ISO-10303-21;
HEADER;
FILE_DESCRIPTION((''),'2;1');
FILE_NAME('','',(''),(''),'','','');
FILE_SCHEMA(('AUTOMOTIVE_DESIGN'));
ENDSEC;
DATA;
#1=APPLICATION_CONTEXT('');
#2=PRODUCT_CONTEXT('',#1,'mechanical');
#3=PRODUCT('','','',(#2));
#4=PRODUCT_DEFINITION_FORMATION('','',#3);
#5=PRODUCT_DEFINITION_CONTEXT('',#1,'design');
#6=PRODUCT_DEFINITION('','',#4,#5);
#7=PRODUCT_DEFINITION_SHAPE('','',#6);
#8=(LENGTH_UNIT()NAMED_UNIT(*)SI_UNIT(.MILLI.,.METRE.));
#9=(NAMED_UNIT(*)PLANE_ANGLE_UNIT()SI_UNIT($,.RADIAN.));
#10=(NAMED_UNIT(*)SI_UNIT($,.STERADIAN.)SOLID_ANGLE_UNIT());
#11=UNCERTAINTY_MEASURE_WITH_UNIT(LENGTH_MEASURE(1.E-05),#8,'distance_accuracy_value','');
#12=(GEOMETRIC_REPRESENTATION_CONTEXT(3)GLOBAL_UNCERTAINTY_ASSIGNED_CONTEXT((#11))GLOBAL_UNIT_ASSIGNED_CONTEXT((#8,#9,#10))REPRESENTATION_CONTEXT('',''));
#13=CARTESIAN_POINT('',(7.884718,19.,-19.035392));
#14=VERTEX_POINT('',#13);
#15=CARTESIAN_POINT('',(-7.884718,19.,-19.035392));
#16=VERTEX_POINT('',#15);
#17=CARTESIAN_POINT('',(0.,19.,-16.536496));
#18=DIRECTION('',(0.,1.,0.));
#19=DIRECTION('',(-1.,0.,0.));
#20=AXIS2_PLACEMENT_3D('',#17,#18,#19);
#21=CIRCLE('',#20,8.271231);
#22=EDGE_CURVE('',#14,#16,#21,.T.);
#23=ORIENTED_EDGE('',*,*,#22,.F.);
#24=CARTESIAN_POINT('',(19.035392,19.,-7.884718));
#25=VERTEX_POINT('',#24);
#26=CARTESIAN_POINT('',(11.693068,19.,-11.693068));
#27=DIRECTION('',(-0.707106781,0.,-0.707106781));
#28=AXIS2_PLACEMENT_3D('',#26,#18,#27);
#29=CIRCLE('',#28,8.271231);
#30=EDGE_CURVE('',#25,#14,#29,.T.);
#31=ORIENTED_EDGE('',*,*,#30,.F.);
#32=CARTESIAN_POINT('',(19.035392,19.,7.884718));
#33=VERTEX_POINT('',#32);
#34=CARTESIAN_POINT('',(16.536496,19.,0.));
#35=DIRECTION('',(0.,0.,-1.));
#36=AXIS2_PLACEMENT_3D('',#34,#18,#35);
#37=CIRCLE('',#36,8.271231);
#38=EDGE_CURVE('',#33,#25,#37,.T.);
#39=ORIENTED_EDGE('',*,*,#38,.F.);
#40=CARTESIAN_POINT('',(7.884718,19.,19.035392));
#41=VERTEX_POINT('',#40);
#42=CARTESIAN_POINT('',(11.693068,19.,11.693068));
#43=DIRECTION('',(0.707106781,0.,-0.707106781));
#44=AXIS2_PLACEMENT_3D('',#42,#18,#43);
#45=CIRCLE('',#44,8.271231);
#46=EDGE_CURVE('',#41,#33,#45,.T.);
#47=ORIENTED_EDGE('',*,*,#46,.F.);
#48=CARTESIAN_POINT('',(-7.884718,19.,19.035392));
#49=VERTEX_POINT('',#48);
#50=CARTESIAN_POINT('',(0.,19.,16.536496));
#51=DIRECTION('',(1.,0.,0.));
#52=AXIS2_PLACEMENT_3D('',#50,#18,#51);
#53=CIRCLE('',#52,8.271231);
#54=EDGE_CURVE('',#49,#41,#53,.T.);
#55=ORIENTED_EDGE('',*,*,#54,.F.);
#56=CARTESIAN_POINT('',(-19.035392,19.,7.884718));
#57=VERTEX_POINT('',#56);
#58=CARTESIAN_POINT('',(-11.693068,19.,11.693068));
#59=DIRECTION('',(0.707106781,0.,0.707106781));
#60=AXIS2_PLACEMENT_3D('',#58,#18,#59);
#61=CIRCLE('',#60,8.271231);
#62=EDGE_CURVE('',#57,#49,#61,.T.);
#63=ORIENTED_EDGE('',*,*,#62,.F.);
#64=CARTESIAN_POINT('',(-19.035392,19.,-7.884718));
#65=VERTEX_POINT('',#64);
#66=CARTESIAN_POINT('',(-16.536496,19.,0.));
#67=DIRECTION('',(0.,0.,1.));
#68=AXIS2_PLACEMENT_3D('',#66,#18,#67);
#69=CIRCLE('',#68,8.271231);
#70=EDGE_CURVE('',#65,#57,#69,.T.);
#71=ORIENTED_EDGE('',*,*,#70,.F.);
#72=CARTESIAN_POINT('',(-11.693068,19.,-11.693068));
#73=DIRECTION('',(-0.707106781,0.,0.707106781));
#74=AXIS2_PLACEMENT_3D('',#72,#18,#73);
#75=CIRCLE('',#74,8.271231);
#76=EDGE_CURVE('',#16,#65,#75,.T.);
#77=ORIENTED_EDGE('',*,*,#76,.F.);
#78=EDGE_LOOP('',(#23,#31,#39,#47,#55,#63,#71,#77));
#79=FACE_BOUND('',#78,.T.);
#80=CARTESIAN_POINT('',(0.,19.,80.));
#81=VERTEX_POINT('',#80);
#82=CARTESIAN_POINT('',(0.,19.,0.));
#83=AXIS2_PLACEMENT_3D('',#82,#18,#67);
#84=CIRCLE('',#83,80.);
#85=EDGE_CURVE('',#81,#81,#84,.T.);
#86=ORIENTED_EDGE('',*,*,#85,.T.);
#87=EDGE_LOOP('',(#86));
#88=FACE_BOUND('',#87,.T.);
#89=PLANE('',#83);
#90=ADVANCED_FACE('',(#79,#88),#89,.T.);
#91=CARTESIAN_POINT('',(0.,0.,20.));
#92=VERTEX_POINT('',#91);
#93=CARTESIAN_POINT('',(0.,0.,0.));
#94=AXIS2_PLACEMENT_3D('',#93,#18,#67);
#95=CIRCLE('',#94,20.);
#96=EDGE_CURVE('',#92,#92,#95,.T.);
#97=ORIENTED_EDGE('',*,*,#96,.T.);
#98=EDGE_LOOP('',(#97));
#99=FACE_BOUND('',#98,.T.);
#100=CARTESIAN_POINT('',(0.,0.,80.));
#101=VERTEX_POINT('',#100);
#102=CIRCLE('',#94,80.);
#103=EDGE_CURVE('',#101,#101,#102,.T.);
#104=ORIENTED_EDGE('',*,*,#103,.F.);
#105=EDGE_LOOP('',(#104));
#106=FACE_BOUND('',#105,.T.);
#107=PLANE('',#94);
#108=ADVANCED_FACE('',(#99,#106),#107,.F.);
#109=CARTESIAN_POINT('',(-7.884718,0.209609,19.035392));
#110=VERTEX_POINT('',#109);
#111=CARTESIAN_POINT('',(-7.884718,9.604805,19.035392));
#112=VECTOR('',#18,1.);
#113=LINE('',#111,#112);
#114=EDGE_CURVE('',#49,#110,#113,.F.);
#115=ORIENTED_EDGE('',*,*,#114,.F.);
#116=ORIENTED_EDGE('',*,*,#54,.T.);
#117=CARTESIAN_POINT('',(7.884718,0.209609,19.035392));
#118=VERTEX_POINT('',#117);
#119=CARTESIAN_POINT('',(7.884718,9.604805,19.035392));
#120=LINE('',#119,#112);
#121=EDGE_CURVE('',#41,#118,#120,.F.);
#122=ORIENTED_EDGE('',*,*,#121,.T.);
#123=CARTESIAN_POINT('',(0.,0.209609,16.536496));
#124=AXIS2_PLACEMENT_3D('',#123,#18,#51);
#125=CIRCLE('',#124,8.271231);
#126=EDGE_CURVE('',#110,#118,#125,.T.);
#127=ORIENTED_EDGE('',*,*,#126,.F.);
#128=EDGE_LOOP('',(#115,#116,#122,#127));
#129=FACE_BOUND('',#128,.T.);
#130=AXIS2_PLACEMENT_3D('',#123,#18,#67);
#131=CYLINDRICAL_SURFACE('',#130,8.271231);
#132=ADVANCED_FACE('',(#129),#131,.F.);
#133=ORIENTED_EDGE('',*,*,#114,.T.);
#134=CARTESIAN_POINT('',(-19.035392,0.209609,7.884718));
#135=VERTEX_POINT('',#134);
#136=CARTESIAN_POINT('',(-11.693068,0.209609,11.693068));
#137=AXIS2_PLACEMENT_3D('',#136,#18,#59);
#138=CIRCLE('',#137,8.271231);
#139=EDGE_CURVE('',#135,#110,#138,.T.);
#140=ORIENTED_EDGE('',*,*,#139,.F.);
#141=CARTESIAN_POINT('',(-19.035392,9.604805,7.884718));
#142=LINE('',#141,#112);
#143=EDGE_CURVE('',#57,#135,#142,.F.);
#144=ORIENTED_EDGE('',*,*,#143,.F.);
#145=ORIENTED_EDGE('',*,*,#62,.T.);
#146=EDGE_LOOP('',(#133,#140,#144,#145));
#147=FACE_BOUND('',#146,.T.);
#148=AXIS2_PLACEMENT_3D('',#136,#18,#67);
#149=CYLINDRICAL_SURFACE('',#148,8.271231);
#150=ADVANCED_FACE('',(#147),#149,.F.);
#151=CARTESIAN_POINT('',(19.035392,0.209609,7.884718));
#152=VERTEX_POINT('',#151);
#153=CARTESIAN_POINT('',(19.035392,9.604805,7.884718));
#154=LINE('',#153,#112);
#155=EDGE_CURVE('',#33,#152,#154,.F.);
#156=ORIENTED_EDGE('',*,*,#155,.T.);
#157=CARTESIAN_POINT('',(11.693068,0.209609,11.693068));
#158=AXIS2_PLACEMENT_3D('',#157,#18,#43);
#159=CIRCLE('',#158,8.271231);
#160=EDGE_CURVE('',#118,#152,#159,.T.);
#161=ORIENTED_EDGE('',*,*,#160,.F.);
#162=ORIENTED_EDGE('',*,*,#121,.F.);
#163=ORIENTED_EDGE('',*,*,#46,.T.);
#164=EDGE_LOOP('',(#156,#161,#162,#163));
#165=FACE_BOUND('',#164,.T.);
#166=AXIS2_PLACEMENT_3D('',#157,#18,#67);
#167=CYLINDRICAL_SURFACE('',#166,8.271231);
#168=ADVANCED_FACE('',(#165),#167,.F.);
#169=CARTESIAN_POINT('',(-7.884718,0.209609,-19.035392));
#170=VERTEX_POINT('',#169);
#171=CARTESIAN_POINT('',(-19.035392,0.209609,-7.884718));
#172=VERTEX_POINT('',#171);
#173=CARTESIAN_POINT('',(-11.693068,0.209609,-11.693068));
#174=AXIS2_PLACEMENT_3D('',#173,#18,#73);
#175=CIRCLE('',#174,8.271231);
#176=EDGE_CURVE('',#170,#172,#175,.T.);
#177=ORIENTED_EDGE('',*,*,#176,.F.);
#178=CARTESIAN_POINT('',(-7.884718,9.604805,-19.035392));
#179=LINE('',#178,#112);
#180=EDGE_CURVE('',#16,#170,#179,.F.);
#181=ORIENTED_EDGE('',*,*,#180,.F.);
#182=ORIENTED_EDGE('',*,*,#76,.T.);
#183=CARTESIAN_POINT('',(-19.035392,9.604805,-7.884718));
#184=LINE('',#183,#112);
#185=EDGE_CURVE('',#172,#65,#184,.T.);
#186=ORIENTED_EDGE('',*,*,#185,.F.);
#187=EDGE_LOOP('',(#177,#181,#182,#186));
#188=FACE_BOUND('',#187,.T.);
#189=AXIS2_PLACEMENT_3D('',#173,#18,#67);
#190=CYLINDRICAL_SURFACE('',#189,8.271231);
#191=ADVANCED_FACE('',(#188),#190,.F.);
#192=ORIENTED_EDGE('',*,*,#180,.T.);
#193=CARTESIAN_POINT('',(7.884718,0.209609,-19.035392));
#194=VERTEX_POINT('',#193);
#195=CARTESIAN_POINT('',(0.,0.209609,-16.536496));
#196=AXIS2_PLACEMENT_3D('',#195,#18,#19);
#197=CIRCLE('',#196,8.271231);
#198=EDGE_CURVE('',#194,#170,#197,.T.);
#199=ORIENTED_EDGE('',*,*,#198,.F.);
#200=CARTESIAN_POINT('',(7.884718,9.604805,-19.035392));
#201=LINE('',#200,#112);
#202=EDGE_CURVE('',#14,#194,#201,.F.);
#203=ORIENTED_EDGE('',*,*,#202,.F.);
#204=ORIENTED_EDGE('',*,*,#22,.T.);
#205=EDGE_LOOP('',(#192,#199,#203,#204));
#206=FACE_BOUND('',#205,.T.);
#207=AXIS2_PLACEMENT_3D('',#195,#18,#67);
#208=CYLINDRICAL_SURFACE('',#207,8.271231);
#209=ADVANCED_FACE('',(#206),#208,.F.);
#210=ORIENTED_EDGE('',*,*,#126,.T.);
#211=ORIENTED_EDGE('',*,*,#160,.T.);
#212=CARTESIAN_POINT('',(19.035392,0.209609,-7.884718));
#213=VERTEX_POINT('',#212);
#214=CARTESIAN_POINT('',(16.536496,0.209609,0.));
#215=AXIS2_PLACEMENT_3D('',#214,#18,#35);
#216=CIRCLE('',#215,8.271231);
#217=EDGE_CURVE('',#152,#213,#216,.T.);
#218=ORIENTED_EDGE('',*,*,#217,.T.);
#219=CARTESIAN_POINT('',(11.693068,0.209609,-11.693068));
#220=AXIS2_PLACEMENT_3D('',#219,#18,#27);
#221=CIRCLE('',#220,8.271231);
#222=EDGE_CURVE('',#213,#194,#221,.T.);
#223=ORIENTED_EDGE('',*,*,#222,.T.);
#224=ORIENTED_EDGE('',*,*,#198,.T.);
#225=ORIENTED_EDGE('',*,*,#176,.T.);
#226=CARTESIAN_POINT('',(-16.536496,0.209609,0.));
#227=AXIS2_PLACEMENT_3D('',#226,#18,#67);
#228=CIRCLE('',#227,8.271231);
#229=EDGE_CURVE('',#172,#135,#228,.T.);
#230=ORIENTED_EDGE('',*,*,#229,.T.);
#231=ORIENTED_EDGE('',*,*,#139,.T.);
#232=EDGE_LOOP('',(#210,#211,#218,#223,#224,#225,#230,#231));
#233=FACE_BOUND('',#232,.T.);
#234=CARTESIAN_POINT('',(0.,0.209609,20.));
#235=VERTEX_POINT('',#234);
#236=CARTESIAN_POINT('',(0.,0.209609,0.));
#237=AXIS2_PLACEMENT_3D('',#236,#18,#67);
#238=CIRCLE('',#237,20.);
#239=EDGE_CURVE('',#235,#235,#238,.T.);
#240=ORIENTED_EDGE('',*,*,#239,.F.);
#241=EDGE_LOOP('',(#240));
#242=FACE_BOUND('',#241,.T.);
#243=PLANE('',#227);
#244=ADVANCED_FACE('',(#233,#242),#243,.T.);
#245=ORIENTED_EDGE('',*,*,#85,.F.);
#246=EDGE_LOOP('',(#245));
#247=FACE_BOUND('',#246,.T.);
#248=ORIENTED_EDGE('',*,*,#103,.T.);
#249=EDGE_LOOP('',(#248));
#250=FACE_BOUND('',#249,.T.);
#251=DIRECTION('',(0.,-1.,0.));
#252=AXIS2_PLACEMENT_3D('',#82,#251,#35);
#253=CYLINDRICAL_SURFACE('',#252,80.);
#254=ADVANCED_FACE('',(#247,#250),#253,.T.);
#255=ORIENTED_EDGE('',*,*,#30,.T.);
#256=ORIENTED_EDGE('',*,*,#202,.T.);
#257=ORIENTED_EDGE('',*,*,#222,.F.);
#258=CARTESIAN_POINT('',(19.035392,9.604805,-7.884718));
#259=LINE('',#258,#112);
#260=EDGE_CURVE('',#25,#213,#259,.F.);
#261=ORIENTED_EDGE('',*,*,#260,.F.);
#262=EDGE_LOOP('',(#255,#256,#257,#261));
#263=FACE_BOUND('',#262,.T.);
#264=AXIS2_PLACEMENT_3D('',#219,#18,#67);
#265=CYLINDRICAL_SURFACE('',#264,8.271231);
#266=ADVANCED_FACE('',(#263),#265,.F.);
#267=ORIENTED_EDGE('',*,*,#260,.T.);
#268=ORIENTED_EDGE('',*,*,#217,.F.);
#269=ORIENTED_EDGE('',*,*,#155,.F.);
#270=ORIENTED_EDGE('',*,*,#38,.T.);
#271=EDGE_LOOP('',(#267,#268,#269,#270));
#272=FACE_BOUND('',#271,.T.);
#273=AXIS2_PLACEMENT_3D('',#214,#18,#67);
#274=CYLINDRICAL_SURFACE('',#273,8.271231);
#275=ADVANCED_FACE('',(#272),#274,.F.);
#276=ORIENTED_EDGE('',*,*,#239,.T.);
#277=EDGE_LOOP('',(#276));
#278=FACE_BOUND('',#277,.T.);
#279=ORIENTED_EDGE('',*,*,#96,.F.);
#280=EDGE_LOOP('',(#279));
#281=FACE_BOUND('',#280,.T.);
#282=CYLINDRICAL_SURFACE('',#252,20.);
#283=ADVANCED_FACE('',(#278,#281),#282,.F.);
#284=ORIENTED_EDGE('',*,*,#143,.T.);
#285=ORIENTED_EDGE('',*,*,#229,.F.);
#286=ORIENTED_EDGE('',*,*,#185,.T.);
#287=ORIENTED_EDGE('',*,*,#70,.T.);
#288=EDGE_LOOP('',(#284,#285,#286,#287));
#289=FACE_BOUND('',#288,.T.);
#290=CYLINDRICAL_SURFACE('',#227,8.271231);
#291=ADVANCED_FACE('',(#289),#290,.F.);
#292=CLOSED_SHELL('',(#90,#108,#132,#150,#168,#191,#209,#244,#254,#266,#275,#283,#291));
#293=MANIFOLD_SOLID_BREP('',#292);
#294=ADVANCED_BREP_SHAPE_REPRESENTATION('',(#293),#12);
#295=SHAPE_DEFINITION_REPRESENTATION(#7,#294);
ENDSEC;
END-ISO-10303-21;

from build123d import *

# Parameters (mm, degrees)
SKETCH1_R           = 80
BOSS_EXTRUDE1_DEPTH = 19
SKETCH2_R           = 20
CUT_EXTRUDE1_DEPTH  = 115.721401665
SKETCH3_R           = 8.271230521
CUT_EXTRUDE2_DEPTH  = 18.790390573
CIRPATTERN1_COUNT   = 8


with BuildPart() as part:
    # Sketch1 → Boss-Extrude1 (new body)
    with BuildSketch(Plane(origin=(0, 0, 0), x_dir=(1, 0, 0), z_dir=(0, 1, 0))):
        Circle(SKETCH1_R)
    extrude(amount=BOSS_EXTRUDE1_DEPTH)

    # Sketch2 → Cut-Extrude1 (cut, through all)
    with BuildSketch(Plane(origin=(0, 0, 0), x_dir=(1, 0, 0), z_dir=(0, 1, 0))):
        Circle(SKETCH2_R)
    extrude(amount=CUT_EXTRUDE1_DEPTH, mode=Mode.SUBTRACT)

    # Sketch3 → Cut-Extrude2 (cut)
    with BuildSketch(Plane(origin=(0, 19, 0), x_dir=(1, 0, 0), z_dir=(0, 1, 0))):
        with Locations((-16.536495709, 0)):
            Circle(SKETCH3_R)
    cut_extrude2 = extrude(amount=-CUT_EXTRUDE2_DEPTH, mode=Mode.SUBTRACT)

    # CirPattern1: Cut-Extrude2 ×8 about axis
    cirpattern1_axis = Axis((0, 0, 0), (0, 1, 0))
    for i in range(1, CIRPATTERN1_COUNT):
        add(cut_extrude2.rotate(cirpattern1_axis, i * 360 / CIRPATTERN1_COUNT), mode=Mode.SUBTRACT)


solid = part.part
